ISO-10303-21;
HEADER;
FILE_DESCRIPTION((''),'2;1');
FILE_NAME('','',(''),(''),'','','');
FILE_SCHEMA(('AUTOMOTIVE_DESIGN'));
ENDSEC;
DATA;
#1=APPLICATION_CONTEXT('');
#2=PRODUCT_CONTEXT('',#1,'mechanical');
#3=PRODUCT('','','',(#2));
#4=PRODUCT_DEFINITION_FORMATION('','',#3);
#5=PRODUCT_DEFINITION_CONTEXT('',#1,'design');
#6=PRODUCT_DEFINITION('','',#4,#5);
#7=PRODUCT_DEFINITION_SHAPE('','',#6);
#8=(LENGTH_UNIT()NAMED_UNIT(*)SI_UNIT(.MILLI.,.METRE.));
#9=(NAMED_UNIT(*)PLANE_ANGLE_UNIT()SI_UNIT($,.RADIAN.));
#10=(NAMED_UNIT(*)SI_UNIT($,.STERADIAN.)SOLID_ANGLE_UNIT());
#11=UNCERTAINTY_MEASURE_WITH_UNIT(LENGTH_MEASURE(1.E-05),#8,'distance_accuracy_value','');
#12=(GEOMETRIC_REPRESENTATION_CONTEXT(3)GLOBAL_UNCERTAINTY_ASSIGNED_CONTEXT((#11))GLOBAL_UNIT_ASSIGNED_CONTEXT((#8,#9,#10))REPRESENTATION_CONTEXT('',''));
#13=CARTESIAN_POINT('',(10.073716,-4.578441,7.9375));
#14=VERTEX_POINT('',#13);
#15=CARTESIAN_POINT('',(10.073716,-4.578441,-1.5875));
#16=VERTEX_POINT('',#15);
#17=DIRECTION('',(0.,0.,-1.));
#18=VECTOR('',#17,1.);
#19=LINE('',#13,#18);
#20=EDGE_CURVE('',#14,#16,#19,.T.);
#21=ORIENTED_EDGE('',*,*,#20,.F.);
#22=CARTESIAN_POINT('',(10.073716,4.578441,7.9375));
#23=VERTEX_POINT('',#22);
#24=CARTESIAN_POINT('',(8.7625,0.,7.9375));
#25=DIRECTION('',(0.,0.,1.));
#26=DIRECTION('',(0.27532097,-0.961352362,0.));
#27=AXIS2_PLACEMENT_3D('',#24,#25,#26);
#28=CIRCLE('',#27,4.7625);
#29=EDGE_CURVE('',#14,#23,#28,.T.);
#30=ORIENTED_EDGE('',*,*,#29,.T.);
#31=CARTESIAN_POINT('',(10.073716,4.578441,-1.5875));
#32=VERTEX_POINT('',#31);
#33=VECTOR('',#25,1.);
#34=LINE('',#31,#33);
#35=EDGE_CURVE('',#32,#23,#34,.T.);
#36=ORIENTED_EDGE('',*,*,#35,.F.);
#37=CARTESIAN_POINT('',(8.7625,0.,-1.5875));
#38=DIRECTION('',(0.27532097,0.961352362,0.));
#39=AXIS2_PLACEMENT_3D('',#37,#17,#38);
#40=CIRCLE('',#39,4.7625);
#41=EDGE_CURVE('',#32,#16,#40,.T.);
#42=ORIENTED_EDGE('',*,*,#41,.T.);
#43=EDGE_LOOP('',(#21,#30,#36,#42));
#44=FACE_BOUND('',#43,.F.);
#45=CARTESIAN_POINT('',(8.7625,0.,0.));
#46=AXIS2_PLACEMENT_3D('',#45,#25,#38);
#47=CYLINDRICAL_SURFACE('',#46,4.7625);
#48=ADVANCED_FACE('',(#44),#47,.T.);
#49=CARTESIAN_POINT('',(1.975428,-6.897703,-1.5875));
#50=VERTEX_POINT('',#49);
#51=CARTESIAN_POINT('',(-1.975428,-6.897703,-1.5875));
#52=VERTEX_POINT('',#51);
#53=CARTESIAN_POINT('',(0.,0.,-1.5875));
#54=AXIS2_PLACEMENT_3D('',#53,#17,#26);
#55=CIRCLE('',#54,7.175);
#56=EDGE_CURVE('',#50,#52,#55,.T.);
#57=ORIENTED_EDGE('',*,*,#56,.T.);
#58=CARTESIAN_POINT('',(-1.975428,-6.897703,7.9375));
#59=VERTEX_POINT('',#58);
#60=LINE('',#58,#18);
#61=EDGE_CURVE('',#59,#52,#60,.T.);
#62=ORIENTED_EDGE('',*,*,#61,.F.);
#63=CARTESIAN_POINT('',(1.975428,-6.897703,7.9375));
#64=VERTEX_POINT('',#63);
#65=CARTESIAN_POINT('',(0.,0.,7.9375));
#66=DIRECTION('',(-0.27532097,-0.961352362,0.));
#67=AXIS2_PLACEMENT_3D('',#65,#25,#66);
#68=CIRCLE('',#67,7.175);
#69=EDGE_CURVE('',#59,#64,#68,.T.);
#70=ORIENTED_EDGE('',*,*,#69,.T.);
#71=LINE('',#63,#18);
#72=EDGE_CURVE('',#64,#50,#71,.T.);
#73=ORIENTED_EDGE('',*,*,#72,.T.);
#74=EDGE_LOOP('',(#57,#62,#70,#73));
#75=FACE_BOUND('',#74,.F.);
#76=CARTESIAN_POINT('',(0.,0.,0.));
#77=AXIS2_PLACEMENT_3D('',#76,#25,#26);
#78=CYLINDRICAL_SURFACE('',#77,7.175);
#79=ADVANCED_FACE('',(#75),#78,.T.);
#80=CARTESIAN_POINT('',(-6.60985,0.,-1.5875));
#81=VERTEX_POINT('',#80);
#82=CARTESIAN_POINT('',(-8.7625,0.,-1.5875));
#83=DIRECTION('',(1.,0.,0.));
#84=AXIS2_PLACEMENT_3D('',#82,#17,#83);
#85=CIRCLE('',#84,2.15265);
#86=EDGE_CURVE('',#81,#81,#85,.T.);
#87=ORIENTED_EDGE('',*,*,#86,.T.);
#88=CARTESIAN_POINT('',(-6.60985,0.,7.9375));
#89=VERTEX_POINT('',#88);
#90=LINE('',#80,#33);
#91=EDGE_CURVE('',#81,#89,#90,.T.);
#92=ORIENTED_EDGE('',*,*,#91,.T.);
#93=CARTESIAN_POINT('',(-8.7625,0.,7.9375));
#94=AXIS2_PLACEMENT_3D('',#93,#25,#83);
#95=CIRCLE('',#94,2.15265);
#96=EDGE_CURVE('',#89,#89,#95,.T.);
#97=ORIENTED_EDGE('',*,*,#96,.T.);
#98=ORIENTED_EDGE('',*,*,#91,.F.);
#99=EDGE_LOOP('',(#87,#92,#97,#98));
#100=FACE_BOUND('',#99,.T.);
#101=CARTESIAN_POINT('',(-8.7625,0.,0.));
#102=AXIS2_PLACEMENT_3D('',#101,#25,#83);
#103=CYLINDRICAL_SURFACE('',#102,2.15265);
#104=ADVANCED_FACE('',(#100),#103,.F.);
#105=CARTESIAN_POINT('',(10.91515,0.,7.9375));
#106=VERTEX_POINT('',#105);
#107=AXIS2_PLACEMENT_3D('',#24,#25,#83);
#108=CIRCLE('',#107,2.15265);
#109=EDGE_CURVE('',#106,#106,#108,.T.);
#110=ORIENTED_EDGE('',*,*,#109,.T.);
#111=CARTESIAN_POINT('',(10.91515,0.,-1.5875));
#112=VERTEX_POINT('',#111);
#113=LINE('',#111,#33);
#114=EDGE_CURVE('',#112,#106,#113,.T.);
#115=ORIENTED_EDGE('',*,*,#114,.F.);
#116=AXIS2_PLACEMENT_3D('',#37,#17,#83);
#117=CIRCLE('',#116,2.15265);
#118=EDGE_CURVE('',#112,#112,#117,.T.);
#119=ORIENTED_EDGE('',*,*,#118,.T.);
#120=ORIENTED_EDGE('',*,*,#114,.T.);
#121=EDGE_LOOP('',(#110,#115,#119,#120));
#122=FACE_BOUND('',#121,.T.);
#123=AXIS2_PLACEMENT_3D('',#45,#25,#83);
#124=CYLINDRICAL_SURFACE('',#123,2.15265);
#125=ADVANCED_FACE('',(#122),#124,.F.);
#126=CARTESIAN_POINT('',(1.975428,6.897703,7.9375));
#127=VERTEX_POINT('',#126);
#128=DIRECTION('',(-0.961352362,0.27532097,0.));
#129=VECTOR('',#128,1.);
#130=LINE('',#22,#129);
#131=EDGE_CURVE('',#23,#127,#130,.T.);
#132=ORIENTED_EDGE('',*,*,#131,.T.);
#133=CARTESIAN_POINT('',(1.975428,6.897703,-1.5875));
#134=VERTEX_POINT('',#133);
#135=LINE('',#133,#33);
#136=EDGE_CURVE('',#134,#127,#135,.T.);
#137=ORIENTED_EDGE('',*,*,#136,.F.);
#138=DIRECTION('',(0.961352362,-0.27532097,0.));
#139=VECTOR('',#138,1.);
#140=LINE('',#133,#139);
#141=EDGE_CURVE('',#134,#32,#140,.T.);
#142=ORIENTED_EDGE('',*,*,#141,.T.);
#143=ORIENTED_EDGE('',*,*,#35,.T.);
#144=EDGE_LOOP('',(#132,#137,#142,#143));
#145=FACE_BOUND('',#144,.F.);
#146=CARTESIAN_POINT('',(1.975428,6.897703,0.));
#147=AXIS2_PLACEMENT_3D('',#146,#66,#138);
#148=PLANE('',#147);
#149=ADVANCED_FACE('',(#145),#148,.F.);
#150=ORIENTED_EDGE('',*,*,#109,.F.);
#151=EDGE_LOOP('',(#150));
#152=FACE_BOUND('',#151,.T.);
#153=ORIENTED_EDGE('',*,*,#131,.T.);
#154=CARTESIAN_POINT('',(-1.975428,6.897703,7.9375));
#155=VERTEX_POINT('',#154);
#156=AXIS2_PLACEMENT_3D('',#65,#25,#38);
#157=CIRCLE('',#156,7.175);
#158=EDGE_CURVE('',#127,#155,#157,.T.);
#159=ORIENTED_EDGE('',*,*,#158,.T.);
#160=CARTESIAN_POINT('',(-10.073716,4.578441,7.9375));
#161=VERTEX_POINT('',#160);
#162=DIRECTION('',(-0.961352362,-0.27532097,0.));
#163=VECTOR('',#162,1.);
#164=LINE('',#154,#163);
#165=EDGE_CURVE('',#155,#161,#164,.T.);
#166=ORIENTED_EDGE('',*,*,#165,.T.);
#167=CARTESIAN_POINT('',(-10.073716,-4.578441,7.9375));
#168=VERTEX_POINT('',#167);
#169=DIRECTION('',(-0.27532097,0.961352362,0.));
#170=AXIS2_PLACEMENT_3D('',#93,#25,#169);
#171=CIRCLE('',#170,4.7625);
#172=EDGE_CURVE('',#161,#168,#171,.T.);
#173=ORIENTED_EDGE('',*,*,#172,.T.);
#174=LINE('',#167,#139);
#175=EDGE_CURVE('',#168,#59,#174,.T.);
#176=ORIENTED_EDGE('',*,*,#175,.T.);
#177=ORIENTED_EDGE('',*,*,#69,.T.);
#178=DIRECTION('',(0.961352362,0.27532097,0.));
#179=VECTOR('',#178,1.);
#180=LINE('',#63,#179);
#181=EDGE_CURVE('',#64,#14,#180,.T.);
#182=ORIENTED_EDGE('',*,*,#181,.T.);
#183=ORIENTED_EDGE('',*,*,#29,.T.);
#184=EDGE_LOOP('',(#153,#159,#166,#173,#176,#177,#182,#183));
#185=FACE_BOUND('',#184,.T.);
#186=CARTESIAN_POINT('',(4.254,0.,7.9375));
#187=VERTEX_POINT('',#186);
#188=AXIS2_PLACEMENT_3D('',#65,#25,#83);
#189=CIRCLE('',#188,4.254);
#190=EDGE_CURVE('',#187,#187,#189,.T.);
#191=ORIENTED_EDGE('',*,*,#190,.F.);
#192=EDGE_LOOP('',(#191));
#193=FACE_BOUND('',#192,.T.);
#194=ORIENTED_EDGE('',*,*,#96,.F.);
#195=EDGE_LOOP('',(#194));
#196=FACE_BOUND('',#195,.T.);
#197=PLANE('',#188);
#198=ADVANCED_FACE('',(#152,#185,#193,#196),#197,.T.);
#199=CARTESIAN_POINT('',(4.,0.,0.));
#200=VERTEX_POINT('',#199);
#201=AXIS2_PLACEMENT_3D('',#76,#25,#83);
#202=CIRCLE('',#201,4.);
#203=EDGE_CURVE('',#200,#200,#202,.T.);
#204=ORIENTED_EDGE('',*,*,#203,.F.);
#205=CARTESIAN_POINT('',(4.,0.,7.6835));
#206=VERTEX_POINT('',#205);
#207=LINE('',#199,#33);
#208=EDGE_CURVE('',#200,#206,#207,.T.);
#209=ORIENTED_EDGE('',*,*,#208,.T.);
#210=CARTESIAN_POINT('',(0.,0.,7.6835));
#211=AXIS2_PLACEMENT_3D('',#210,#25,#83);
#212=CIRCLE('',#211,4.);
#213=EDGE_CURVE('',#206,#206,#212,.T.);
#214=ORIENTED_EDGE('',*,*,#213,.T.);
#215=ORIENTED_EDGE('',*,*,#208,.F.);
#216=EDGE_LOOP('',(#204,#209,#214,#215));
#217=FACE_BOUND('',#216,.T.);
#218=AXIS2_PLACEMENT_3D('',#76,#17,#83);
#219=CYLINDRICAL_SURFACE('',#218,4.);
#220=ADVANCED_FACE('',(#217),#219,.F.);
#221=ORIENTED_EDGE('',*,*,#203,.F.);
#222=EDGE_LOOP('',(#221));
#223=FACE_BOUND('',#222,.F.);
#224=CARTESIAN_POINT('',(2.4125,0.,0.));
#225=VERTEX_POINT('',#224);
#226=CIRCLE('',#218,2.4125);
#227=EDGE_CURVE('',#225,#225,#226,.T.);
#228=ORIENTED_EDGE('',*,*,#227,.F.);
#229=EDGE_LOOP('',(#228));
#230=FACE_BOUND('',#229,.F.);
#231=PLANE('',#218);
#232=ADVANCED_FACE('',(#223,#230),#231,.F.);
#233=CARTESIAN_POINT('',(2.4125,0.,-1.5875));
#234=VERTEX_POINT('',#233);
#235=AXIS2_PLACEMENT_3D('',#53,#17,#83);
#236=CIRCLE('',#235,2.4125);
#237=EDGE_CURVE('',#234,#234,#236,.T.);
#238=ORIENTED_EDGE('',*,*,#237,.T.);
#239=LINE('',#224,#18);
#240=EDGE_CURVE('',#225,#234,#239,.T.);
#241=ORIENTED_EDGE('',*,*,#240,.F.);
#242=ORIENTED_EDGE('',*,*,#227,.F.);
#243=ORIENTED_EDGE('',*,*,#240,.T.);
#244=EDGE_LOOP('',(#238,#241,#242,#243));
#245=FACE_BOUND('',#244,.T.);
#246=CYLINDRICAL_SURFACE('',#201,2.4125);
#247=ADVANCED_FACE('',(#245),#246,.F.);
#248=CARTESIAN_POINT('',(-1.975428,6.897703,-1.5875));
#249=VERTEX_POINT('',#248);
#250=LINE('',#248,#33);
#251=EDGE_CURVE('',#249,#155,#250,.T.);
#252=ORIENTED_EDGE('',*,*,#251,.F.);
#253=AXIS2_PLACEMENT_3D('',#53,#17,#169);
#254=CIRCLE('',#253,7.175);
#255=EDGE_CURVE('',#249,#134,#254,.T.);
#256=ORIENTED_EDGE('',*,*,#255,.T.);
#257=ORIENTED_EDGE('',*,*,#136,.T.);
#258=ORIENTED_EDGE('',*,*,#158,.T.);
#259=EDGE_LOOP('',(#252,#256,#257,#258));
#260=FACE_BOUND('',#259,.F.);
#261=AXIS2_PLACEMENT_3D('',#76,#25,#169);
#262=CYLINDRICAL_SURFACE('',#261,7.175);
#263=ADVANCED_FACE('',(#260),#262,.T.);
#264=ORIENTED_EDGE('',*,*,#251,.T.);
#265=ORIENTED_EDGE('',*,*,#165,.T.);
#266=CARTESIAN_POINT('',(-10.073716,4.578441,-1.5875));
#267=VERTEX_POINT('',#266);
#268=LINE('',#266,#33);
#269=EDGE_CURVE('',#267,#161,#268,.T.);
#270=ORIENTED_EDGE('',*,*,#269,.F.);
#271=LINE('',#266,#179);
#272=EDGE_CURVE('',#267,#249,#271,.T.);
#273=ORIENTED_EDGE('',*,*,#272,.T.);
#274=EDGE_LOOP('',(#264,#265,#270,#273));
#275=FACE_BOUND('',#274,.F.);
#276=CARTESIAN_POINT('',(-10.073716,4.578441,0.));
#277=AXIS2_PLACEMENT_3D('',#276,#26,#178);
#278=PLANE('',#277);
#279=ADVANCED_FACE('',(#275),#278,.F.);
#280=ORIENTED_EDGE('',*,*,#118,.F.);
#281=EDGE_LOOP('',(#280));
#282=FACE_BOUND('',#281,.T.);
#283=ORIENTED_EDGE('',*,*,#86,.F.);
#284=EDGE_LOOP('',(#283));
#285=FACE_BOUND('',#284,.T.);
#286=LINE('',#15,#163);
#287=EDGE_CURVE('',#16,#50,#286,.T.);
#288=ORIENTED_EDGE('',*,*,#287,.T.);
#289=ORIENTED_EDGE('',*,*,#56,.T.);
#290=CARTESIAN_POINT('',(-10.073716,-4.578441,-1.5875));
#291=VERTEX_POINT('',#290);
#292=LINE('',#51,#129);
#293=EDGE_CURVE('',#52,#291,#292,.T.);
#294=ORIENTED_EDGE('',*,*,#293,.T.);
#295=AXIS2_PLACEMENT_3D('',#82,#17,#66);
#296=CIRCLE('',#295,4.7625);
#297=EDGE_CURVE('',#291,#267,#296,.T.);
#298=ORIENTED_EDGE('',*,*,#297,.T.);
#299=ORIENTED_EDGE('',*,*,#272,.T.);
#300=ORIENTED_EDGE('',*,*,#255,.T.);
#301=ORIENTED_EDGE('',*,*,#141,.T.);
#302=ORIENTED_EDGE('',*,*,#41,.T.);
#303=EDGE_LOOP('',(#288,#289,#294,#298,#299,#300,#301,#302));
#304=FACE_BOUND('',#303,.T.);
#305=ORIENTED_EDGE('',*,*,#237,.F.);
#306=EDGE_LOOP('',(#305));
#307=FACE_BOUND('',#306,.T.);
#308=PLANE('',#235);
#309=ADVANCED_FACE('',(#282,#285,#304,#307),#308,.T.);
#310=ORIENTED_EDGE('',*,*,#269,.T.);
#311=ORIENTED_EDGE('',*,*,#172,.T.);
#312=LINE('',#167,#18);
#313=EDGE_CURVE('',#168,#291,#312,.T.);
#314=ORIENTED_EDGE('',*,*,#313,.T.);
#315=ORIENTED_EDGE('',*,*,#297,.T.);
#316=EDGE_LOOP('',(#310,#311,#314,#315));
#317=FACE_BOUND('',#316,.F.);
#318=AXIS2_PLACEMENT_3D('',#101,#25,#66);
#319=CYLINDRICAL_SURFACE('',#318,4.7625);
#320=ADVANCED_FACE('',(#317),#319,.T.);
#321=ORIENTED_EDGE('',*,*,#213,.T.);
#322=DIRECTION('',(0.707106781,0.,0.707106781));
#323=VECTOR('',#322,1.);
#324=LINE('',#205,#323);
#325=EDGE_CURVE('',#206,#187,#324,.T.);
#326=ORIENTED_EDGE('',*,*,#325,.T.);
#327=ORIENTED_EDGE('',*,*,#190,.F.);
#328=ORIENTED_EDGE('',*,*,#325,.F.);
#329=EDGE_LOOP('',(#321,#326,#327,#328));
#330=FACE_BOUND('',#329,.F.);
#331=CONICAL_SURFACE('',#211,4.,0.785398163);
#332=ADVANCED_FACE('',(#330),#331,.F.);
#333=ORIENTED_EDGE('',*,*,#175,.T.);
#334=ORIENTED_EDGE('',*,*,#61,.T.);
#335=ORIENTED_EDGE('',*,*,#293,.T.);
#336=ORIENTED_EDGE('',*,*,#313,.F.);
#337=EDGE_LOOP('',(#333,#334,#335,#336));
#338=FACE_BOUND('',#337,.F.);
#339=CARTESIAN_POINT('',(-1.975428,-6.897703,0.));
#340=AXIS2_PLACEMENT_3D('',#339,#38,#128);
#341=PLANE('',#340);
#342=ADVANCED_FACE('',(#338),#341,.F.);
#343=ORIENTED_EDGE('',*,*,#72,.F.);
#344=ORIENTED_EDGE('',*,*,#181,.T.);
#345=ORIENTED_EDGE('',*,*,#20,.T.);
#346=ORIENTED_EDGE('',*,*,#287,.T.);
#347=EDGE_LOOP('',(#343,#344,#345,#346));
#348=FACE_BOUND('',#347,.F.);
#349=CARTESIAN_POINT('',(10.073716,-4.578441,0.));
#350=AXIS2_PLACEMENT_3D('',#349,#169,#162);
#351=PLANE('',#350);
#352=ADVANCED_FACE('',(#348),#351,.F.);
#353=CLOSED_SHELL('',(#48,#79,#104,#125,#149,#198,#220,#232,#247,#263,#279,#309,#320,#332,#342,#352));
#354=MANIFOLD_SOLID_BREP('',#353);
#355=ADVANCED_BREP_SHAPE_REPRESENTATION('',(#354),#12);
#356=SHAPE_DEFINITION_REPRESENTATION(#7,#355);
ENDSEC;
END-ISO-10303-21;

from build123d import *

# Parameters (mm, degrees)
F0_R     = 2.15265
F0_R_2   = 4
F1_DEPTH = 7.9375
F2_SIZE  = 0.254
F3_R     = 2.15265
F3_R_2   = 4
F3_R_3   = 2.4125
F4_DEPTH = 1.5875


with BuildPart() as f1:
    # F0 (on Top) → F1 (new body)
    with BuildSketch(Plane.XY):
        with BuildLine():
            Line((10.0737161198, 4.5784406229), (1.9754279601, 6.8977031956))
            ThreePointArc((1.9754279601, 6.8977031956), (0, 7.175), (-1.9754279601, 6.8977031956))
            Line((-1.9754279601, 6.8977031956), (-10.0737161198, 4.5784406229))
            ThreePointArc((-10.0737161198, 4.5784406229), (-13.525, 0), (-10.0737161198, -4.5784406229))
            Line((-10.0737161198, -4.5784406229), (-1.9754279601, -6.8977031956))
            ThreePointArc((-1.9754279601, -6.8977031956), (0, -7.175), (1.9754279601, -6.8977031956))
            Line((1.9754279601, -6.8977031956), (10.0737161198, -4.5784406229))
            ThreePointArc((10.0737161198, -4.5784406229), (13.525, 0), (10.0737161198, 4.5784406229))
        make_face()
        with Locations((-8.7625, 0)):
            Circle(F0_R, mode=Mode.SUBTRACT)
        Circle(F0_R_2, mode=Mode.SUBTRACT)
        with Locations((8.7625, 0)):
            Circle(F0_R, mode=Mode.SUBTRACT)
    extrude(amount=F1_DEPTH)

    # F2
    f2_edges = [f1.edges().sort_by_distance(p)[0] for p in [
        (-4, 0, 7.9375),
    ]]
    chamfer(f2_edges, length=F2_SIZE)

    # F3 (on face) → F4 (join)
    with BuildSketch(Plane(origin=(0, 0, 0), x_dir=(1, 0, 0), z_dir=(0, 0, -1))):
        with BuildLine():
            ThreePointArc((10.0737161198, -4.5784406229), (13.525, 0), (10.0737161198, 4.5784406229))
            Line((10.0737161198, 4.5784406229), (1.9754279601, 6.8977031956))
            ThreePointArc((1.9754279601, 6.8977031956), (0, 7.175), (-1.9754279601, 6.8977031956))
            Line((-1.9754279601, 6.8977031956), (-10.0737161198, 4.5784406229))
            ThreePointArc((-10.0737161198, 4.5784406229), (-13.525, 0), (-10.0737161198, -4.5784406229))
            Line((-10.0737161198, -4.5784406229), (-1.9754279601, -6.8977031956))
            ThreePointArc((-1.9754279601, -6.8977031956), (0, -7.175), (1.9754279601, -6.8977031956))
            Line((1.9754279601, -6.8977031956), (10.0737161198, -4.5784406229))
        make_face()
        with Locations((-8.7625, 0)):
            Circle(F3_R, mode=Mode.SUBTRACT)
        Circle(F3_R_2, mode=Mode.SUBTRACT)
        with Locations((8.7625, 0)):
            Circle(F3_R, mode=Mode.SUBTRACT)
        Circle(F3_R_2)
        Circle(F3_R_3, mode=Mode.SUBTRACT)
    extrude(amount=F4_DEPTH)


solid = f1.part
